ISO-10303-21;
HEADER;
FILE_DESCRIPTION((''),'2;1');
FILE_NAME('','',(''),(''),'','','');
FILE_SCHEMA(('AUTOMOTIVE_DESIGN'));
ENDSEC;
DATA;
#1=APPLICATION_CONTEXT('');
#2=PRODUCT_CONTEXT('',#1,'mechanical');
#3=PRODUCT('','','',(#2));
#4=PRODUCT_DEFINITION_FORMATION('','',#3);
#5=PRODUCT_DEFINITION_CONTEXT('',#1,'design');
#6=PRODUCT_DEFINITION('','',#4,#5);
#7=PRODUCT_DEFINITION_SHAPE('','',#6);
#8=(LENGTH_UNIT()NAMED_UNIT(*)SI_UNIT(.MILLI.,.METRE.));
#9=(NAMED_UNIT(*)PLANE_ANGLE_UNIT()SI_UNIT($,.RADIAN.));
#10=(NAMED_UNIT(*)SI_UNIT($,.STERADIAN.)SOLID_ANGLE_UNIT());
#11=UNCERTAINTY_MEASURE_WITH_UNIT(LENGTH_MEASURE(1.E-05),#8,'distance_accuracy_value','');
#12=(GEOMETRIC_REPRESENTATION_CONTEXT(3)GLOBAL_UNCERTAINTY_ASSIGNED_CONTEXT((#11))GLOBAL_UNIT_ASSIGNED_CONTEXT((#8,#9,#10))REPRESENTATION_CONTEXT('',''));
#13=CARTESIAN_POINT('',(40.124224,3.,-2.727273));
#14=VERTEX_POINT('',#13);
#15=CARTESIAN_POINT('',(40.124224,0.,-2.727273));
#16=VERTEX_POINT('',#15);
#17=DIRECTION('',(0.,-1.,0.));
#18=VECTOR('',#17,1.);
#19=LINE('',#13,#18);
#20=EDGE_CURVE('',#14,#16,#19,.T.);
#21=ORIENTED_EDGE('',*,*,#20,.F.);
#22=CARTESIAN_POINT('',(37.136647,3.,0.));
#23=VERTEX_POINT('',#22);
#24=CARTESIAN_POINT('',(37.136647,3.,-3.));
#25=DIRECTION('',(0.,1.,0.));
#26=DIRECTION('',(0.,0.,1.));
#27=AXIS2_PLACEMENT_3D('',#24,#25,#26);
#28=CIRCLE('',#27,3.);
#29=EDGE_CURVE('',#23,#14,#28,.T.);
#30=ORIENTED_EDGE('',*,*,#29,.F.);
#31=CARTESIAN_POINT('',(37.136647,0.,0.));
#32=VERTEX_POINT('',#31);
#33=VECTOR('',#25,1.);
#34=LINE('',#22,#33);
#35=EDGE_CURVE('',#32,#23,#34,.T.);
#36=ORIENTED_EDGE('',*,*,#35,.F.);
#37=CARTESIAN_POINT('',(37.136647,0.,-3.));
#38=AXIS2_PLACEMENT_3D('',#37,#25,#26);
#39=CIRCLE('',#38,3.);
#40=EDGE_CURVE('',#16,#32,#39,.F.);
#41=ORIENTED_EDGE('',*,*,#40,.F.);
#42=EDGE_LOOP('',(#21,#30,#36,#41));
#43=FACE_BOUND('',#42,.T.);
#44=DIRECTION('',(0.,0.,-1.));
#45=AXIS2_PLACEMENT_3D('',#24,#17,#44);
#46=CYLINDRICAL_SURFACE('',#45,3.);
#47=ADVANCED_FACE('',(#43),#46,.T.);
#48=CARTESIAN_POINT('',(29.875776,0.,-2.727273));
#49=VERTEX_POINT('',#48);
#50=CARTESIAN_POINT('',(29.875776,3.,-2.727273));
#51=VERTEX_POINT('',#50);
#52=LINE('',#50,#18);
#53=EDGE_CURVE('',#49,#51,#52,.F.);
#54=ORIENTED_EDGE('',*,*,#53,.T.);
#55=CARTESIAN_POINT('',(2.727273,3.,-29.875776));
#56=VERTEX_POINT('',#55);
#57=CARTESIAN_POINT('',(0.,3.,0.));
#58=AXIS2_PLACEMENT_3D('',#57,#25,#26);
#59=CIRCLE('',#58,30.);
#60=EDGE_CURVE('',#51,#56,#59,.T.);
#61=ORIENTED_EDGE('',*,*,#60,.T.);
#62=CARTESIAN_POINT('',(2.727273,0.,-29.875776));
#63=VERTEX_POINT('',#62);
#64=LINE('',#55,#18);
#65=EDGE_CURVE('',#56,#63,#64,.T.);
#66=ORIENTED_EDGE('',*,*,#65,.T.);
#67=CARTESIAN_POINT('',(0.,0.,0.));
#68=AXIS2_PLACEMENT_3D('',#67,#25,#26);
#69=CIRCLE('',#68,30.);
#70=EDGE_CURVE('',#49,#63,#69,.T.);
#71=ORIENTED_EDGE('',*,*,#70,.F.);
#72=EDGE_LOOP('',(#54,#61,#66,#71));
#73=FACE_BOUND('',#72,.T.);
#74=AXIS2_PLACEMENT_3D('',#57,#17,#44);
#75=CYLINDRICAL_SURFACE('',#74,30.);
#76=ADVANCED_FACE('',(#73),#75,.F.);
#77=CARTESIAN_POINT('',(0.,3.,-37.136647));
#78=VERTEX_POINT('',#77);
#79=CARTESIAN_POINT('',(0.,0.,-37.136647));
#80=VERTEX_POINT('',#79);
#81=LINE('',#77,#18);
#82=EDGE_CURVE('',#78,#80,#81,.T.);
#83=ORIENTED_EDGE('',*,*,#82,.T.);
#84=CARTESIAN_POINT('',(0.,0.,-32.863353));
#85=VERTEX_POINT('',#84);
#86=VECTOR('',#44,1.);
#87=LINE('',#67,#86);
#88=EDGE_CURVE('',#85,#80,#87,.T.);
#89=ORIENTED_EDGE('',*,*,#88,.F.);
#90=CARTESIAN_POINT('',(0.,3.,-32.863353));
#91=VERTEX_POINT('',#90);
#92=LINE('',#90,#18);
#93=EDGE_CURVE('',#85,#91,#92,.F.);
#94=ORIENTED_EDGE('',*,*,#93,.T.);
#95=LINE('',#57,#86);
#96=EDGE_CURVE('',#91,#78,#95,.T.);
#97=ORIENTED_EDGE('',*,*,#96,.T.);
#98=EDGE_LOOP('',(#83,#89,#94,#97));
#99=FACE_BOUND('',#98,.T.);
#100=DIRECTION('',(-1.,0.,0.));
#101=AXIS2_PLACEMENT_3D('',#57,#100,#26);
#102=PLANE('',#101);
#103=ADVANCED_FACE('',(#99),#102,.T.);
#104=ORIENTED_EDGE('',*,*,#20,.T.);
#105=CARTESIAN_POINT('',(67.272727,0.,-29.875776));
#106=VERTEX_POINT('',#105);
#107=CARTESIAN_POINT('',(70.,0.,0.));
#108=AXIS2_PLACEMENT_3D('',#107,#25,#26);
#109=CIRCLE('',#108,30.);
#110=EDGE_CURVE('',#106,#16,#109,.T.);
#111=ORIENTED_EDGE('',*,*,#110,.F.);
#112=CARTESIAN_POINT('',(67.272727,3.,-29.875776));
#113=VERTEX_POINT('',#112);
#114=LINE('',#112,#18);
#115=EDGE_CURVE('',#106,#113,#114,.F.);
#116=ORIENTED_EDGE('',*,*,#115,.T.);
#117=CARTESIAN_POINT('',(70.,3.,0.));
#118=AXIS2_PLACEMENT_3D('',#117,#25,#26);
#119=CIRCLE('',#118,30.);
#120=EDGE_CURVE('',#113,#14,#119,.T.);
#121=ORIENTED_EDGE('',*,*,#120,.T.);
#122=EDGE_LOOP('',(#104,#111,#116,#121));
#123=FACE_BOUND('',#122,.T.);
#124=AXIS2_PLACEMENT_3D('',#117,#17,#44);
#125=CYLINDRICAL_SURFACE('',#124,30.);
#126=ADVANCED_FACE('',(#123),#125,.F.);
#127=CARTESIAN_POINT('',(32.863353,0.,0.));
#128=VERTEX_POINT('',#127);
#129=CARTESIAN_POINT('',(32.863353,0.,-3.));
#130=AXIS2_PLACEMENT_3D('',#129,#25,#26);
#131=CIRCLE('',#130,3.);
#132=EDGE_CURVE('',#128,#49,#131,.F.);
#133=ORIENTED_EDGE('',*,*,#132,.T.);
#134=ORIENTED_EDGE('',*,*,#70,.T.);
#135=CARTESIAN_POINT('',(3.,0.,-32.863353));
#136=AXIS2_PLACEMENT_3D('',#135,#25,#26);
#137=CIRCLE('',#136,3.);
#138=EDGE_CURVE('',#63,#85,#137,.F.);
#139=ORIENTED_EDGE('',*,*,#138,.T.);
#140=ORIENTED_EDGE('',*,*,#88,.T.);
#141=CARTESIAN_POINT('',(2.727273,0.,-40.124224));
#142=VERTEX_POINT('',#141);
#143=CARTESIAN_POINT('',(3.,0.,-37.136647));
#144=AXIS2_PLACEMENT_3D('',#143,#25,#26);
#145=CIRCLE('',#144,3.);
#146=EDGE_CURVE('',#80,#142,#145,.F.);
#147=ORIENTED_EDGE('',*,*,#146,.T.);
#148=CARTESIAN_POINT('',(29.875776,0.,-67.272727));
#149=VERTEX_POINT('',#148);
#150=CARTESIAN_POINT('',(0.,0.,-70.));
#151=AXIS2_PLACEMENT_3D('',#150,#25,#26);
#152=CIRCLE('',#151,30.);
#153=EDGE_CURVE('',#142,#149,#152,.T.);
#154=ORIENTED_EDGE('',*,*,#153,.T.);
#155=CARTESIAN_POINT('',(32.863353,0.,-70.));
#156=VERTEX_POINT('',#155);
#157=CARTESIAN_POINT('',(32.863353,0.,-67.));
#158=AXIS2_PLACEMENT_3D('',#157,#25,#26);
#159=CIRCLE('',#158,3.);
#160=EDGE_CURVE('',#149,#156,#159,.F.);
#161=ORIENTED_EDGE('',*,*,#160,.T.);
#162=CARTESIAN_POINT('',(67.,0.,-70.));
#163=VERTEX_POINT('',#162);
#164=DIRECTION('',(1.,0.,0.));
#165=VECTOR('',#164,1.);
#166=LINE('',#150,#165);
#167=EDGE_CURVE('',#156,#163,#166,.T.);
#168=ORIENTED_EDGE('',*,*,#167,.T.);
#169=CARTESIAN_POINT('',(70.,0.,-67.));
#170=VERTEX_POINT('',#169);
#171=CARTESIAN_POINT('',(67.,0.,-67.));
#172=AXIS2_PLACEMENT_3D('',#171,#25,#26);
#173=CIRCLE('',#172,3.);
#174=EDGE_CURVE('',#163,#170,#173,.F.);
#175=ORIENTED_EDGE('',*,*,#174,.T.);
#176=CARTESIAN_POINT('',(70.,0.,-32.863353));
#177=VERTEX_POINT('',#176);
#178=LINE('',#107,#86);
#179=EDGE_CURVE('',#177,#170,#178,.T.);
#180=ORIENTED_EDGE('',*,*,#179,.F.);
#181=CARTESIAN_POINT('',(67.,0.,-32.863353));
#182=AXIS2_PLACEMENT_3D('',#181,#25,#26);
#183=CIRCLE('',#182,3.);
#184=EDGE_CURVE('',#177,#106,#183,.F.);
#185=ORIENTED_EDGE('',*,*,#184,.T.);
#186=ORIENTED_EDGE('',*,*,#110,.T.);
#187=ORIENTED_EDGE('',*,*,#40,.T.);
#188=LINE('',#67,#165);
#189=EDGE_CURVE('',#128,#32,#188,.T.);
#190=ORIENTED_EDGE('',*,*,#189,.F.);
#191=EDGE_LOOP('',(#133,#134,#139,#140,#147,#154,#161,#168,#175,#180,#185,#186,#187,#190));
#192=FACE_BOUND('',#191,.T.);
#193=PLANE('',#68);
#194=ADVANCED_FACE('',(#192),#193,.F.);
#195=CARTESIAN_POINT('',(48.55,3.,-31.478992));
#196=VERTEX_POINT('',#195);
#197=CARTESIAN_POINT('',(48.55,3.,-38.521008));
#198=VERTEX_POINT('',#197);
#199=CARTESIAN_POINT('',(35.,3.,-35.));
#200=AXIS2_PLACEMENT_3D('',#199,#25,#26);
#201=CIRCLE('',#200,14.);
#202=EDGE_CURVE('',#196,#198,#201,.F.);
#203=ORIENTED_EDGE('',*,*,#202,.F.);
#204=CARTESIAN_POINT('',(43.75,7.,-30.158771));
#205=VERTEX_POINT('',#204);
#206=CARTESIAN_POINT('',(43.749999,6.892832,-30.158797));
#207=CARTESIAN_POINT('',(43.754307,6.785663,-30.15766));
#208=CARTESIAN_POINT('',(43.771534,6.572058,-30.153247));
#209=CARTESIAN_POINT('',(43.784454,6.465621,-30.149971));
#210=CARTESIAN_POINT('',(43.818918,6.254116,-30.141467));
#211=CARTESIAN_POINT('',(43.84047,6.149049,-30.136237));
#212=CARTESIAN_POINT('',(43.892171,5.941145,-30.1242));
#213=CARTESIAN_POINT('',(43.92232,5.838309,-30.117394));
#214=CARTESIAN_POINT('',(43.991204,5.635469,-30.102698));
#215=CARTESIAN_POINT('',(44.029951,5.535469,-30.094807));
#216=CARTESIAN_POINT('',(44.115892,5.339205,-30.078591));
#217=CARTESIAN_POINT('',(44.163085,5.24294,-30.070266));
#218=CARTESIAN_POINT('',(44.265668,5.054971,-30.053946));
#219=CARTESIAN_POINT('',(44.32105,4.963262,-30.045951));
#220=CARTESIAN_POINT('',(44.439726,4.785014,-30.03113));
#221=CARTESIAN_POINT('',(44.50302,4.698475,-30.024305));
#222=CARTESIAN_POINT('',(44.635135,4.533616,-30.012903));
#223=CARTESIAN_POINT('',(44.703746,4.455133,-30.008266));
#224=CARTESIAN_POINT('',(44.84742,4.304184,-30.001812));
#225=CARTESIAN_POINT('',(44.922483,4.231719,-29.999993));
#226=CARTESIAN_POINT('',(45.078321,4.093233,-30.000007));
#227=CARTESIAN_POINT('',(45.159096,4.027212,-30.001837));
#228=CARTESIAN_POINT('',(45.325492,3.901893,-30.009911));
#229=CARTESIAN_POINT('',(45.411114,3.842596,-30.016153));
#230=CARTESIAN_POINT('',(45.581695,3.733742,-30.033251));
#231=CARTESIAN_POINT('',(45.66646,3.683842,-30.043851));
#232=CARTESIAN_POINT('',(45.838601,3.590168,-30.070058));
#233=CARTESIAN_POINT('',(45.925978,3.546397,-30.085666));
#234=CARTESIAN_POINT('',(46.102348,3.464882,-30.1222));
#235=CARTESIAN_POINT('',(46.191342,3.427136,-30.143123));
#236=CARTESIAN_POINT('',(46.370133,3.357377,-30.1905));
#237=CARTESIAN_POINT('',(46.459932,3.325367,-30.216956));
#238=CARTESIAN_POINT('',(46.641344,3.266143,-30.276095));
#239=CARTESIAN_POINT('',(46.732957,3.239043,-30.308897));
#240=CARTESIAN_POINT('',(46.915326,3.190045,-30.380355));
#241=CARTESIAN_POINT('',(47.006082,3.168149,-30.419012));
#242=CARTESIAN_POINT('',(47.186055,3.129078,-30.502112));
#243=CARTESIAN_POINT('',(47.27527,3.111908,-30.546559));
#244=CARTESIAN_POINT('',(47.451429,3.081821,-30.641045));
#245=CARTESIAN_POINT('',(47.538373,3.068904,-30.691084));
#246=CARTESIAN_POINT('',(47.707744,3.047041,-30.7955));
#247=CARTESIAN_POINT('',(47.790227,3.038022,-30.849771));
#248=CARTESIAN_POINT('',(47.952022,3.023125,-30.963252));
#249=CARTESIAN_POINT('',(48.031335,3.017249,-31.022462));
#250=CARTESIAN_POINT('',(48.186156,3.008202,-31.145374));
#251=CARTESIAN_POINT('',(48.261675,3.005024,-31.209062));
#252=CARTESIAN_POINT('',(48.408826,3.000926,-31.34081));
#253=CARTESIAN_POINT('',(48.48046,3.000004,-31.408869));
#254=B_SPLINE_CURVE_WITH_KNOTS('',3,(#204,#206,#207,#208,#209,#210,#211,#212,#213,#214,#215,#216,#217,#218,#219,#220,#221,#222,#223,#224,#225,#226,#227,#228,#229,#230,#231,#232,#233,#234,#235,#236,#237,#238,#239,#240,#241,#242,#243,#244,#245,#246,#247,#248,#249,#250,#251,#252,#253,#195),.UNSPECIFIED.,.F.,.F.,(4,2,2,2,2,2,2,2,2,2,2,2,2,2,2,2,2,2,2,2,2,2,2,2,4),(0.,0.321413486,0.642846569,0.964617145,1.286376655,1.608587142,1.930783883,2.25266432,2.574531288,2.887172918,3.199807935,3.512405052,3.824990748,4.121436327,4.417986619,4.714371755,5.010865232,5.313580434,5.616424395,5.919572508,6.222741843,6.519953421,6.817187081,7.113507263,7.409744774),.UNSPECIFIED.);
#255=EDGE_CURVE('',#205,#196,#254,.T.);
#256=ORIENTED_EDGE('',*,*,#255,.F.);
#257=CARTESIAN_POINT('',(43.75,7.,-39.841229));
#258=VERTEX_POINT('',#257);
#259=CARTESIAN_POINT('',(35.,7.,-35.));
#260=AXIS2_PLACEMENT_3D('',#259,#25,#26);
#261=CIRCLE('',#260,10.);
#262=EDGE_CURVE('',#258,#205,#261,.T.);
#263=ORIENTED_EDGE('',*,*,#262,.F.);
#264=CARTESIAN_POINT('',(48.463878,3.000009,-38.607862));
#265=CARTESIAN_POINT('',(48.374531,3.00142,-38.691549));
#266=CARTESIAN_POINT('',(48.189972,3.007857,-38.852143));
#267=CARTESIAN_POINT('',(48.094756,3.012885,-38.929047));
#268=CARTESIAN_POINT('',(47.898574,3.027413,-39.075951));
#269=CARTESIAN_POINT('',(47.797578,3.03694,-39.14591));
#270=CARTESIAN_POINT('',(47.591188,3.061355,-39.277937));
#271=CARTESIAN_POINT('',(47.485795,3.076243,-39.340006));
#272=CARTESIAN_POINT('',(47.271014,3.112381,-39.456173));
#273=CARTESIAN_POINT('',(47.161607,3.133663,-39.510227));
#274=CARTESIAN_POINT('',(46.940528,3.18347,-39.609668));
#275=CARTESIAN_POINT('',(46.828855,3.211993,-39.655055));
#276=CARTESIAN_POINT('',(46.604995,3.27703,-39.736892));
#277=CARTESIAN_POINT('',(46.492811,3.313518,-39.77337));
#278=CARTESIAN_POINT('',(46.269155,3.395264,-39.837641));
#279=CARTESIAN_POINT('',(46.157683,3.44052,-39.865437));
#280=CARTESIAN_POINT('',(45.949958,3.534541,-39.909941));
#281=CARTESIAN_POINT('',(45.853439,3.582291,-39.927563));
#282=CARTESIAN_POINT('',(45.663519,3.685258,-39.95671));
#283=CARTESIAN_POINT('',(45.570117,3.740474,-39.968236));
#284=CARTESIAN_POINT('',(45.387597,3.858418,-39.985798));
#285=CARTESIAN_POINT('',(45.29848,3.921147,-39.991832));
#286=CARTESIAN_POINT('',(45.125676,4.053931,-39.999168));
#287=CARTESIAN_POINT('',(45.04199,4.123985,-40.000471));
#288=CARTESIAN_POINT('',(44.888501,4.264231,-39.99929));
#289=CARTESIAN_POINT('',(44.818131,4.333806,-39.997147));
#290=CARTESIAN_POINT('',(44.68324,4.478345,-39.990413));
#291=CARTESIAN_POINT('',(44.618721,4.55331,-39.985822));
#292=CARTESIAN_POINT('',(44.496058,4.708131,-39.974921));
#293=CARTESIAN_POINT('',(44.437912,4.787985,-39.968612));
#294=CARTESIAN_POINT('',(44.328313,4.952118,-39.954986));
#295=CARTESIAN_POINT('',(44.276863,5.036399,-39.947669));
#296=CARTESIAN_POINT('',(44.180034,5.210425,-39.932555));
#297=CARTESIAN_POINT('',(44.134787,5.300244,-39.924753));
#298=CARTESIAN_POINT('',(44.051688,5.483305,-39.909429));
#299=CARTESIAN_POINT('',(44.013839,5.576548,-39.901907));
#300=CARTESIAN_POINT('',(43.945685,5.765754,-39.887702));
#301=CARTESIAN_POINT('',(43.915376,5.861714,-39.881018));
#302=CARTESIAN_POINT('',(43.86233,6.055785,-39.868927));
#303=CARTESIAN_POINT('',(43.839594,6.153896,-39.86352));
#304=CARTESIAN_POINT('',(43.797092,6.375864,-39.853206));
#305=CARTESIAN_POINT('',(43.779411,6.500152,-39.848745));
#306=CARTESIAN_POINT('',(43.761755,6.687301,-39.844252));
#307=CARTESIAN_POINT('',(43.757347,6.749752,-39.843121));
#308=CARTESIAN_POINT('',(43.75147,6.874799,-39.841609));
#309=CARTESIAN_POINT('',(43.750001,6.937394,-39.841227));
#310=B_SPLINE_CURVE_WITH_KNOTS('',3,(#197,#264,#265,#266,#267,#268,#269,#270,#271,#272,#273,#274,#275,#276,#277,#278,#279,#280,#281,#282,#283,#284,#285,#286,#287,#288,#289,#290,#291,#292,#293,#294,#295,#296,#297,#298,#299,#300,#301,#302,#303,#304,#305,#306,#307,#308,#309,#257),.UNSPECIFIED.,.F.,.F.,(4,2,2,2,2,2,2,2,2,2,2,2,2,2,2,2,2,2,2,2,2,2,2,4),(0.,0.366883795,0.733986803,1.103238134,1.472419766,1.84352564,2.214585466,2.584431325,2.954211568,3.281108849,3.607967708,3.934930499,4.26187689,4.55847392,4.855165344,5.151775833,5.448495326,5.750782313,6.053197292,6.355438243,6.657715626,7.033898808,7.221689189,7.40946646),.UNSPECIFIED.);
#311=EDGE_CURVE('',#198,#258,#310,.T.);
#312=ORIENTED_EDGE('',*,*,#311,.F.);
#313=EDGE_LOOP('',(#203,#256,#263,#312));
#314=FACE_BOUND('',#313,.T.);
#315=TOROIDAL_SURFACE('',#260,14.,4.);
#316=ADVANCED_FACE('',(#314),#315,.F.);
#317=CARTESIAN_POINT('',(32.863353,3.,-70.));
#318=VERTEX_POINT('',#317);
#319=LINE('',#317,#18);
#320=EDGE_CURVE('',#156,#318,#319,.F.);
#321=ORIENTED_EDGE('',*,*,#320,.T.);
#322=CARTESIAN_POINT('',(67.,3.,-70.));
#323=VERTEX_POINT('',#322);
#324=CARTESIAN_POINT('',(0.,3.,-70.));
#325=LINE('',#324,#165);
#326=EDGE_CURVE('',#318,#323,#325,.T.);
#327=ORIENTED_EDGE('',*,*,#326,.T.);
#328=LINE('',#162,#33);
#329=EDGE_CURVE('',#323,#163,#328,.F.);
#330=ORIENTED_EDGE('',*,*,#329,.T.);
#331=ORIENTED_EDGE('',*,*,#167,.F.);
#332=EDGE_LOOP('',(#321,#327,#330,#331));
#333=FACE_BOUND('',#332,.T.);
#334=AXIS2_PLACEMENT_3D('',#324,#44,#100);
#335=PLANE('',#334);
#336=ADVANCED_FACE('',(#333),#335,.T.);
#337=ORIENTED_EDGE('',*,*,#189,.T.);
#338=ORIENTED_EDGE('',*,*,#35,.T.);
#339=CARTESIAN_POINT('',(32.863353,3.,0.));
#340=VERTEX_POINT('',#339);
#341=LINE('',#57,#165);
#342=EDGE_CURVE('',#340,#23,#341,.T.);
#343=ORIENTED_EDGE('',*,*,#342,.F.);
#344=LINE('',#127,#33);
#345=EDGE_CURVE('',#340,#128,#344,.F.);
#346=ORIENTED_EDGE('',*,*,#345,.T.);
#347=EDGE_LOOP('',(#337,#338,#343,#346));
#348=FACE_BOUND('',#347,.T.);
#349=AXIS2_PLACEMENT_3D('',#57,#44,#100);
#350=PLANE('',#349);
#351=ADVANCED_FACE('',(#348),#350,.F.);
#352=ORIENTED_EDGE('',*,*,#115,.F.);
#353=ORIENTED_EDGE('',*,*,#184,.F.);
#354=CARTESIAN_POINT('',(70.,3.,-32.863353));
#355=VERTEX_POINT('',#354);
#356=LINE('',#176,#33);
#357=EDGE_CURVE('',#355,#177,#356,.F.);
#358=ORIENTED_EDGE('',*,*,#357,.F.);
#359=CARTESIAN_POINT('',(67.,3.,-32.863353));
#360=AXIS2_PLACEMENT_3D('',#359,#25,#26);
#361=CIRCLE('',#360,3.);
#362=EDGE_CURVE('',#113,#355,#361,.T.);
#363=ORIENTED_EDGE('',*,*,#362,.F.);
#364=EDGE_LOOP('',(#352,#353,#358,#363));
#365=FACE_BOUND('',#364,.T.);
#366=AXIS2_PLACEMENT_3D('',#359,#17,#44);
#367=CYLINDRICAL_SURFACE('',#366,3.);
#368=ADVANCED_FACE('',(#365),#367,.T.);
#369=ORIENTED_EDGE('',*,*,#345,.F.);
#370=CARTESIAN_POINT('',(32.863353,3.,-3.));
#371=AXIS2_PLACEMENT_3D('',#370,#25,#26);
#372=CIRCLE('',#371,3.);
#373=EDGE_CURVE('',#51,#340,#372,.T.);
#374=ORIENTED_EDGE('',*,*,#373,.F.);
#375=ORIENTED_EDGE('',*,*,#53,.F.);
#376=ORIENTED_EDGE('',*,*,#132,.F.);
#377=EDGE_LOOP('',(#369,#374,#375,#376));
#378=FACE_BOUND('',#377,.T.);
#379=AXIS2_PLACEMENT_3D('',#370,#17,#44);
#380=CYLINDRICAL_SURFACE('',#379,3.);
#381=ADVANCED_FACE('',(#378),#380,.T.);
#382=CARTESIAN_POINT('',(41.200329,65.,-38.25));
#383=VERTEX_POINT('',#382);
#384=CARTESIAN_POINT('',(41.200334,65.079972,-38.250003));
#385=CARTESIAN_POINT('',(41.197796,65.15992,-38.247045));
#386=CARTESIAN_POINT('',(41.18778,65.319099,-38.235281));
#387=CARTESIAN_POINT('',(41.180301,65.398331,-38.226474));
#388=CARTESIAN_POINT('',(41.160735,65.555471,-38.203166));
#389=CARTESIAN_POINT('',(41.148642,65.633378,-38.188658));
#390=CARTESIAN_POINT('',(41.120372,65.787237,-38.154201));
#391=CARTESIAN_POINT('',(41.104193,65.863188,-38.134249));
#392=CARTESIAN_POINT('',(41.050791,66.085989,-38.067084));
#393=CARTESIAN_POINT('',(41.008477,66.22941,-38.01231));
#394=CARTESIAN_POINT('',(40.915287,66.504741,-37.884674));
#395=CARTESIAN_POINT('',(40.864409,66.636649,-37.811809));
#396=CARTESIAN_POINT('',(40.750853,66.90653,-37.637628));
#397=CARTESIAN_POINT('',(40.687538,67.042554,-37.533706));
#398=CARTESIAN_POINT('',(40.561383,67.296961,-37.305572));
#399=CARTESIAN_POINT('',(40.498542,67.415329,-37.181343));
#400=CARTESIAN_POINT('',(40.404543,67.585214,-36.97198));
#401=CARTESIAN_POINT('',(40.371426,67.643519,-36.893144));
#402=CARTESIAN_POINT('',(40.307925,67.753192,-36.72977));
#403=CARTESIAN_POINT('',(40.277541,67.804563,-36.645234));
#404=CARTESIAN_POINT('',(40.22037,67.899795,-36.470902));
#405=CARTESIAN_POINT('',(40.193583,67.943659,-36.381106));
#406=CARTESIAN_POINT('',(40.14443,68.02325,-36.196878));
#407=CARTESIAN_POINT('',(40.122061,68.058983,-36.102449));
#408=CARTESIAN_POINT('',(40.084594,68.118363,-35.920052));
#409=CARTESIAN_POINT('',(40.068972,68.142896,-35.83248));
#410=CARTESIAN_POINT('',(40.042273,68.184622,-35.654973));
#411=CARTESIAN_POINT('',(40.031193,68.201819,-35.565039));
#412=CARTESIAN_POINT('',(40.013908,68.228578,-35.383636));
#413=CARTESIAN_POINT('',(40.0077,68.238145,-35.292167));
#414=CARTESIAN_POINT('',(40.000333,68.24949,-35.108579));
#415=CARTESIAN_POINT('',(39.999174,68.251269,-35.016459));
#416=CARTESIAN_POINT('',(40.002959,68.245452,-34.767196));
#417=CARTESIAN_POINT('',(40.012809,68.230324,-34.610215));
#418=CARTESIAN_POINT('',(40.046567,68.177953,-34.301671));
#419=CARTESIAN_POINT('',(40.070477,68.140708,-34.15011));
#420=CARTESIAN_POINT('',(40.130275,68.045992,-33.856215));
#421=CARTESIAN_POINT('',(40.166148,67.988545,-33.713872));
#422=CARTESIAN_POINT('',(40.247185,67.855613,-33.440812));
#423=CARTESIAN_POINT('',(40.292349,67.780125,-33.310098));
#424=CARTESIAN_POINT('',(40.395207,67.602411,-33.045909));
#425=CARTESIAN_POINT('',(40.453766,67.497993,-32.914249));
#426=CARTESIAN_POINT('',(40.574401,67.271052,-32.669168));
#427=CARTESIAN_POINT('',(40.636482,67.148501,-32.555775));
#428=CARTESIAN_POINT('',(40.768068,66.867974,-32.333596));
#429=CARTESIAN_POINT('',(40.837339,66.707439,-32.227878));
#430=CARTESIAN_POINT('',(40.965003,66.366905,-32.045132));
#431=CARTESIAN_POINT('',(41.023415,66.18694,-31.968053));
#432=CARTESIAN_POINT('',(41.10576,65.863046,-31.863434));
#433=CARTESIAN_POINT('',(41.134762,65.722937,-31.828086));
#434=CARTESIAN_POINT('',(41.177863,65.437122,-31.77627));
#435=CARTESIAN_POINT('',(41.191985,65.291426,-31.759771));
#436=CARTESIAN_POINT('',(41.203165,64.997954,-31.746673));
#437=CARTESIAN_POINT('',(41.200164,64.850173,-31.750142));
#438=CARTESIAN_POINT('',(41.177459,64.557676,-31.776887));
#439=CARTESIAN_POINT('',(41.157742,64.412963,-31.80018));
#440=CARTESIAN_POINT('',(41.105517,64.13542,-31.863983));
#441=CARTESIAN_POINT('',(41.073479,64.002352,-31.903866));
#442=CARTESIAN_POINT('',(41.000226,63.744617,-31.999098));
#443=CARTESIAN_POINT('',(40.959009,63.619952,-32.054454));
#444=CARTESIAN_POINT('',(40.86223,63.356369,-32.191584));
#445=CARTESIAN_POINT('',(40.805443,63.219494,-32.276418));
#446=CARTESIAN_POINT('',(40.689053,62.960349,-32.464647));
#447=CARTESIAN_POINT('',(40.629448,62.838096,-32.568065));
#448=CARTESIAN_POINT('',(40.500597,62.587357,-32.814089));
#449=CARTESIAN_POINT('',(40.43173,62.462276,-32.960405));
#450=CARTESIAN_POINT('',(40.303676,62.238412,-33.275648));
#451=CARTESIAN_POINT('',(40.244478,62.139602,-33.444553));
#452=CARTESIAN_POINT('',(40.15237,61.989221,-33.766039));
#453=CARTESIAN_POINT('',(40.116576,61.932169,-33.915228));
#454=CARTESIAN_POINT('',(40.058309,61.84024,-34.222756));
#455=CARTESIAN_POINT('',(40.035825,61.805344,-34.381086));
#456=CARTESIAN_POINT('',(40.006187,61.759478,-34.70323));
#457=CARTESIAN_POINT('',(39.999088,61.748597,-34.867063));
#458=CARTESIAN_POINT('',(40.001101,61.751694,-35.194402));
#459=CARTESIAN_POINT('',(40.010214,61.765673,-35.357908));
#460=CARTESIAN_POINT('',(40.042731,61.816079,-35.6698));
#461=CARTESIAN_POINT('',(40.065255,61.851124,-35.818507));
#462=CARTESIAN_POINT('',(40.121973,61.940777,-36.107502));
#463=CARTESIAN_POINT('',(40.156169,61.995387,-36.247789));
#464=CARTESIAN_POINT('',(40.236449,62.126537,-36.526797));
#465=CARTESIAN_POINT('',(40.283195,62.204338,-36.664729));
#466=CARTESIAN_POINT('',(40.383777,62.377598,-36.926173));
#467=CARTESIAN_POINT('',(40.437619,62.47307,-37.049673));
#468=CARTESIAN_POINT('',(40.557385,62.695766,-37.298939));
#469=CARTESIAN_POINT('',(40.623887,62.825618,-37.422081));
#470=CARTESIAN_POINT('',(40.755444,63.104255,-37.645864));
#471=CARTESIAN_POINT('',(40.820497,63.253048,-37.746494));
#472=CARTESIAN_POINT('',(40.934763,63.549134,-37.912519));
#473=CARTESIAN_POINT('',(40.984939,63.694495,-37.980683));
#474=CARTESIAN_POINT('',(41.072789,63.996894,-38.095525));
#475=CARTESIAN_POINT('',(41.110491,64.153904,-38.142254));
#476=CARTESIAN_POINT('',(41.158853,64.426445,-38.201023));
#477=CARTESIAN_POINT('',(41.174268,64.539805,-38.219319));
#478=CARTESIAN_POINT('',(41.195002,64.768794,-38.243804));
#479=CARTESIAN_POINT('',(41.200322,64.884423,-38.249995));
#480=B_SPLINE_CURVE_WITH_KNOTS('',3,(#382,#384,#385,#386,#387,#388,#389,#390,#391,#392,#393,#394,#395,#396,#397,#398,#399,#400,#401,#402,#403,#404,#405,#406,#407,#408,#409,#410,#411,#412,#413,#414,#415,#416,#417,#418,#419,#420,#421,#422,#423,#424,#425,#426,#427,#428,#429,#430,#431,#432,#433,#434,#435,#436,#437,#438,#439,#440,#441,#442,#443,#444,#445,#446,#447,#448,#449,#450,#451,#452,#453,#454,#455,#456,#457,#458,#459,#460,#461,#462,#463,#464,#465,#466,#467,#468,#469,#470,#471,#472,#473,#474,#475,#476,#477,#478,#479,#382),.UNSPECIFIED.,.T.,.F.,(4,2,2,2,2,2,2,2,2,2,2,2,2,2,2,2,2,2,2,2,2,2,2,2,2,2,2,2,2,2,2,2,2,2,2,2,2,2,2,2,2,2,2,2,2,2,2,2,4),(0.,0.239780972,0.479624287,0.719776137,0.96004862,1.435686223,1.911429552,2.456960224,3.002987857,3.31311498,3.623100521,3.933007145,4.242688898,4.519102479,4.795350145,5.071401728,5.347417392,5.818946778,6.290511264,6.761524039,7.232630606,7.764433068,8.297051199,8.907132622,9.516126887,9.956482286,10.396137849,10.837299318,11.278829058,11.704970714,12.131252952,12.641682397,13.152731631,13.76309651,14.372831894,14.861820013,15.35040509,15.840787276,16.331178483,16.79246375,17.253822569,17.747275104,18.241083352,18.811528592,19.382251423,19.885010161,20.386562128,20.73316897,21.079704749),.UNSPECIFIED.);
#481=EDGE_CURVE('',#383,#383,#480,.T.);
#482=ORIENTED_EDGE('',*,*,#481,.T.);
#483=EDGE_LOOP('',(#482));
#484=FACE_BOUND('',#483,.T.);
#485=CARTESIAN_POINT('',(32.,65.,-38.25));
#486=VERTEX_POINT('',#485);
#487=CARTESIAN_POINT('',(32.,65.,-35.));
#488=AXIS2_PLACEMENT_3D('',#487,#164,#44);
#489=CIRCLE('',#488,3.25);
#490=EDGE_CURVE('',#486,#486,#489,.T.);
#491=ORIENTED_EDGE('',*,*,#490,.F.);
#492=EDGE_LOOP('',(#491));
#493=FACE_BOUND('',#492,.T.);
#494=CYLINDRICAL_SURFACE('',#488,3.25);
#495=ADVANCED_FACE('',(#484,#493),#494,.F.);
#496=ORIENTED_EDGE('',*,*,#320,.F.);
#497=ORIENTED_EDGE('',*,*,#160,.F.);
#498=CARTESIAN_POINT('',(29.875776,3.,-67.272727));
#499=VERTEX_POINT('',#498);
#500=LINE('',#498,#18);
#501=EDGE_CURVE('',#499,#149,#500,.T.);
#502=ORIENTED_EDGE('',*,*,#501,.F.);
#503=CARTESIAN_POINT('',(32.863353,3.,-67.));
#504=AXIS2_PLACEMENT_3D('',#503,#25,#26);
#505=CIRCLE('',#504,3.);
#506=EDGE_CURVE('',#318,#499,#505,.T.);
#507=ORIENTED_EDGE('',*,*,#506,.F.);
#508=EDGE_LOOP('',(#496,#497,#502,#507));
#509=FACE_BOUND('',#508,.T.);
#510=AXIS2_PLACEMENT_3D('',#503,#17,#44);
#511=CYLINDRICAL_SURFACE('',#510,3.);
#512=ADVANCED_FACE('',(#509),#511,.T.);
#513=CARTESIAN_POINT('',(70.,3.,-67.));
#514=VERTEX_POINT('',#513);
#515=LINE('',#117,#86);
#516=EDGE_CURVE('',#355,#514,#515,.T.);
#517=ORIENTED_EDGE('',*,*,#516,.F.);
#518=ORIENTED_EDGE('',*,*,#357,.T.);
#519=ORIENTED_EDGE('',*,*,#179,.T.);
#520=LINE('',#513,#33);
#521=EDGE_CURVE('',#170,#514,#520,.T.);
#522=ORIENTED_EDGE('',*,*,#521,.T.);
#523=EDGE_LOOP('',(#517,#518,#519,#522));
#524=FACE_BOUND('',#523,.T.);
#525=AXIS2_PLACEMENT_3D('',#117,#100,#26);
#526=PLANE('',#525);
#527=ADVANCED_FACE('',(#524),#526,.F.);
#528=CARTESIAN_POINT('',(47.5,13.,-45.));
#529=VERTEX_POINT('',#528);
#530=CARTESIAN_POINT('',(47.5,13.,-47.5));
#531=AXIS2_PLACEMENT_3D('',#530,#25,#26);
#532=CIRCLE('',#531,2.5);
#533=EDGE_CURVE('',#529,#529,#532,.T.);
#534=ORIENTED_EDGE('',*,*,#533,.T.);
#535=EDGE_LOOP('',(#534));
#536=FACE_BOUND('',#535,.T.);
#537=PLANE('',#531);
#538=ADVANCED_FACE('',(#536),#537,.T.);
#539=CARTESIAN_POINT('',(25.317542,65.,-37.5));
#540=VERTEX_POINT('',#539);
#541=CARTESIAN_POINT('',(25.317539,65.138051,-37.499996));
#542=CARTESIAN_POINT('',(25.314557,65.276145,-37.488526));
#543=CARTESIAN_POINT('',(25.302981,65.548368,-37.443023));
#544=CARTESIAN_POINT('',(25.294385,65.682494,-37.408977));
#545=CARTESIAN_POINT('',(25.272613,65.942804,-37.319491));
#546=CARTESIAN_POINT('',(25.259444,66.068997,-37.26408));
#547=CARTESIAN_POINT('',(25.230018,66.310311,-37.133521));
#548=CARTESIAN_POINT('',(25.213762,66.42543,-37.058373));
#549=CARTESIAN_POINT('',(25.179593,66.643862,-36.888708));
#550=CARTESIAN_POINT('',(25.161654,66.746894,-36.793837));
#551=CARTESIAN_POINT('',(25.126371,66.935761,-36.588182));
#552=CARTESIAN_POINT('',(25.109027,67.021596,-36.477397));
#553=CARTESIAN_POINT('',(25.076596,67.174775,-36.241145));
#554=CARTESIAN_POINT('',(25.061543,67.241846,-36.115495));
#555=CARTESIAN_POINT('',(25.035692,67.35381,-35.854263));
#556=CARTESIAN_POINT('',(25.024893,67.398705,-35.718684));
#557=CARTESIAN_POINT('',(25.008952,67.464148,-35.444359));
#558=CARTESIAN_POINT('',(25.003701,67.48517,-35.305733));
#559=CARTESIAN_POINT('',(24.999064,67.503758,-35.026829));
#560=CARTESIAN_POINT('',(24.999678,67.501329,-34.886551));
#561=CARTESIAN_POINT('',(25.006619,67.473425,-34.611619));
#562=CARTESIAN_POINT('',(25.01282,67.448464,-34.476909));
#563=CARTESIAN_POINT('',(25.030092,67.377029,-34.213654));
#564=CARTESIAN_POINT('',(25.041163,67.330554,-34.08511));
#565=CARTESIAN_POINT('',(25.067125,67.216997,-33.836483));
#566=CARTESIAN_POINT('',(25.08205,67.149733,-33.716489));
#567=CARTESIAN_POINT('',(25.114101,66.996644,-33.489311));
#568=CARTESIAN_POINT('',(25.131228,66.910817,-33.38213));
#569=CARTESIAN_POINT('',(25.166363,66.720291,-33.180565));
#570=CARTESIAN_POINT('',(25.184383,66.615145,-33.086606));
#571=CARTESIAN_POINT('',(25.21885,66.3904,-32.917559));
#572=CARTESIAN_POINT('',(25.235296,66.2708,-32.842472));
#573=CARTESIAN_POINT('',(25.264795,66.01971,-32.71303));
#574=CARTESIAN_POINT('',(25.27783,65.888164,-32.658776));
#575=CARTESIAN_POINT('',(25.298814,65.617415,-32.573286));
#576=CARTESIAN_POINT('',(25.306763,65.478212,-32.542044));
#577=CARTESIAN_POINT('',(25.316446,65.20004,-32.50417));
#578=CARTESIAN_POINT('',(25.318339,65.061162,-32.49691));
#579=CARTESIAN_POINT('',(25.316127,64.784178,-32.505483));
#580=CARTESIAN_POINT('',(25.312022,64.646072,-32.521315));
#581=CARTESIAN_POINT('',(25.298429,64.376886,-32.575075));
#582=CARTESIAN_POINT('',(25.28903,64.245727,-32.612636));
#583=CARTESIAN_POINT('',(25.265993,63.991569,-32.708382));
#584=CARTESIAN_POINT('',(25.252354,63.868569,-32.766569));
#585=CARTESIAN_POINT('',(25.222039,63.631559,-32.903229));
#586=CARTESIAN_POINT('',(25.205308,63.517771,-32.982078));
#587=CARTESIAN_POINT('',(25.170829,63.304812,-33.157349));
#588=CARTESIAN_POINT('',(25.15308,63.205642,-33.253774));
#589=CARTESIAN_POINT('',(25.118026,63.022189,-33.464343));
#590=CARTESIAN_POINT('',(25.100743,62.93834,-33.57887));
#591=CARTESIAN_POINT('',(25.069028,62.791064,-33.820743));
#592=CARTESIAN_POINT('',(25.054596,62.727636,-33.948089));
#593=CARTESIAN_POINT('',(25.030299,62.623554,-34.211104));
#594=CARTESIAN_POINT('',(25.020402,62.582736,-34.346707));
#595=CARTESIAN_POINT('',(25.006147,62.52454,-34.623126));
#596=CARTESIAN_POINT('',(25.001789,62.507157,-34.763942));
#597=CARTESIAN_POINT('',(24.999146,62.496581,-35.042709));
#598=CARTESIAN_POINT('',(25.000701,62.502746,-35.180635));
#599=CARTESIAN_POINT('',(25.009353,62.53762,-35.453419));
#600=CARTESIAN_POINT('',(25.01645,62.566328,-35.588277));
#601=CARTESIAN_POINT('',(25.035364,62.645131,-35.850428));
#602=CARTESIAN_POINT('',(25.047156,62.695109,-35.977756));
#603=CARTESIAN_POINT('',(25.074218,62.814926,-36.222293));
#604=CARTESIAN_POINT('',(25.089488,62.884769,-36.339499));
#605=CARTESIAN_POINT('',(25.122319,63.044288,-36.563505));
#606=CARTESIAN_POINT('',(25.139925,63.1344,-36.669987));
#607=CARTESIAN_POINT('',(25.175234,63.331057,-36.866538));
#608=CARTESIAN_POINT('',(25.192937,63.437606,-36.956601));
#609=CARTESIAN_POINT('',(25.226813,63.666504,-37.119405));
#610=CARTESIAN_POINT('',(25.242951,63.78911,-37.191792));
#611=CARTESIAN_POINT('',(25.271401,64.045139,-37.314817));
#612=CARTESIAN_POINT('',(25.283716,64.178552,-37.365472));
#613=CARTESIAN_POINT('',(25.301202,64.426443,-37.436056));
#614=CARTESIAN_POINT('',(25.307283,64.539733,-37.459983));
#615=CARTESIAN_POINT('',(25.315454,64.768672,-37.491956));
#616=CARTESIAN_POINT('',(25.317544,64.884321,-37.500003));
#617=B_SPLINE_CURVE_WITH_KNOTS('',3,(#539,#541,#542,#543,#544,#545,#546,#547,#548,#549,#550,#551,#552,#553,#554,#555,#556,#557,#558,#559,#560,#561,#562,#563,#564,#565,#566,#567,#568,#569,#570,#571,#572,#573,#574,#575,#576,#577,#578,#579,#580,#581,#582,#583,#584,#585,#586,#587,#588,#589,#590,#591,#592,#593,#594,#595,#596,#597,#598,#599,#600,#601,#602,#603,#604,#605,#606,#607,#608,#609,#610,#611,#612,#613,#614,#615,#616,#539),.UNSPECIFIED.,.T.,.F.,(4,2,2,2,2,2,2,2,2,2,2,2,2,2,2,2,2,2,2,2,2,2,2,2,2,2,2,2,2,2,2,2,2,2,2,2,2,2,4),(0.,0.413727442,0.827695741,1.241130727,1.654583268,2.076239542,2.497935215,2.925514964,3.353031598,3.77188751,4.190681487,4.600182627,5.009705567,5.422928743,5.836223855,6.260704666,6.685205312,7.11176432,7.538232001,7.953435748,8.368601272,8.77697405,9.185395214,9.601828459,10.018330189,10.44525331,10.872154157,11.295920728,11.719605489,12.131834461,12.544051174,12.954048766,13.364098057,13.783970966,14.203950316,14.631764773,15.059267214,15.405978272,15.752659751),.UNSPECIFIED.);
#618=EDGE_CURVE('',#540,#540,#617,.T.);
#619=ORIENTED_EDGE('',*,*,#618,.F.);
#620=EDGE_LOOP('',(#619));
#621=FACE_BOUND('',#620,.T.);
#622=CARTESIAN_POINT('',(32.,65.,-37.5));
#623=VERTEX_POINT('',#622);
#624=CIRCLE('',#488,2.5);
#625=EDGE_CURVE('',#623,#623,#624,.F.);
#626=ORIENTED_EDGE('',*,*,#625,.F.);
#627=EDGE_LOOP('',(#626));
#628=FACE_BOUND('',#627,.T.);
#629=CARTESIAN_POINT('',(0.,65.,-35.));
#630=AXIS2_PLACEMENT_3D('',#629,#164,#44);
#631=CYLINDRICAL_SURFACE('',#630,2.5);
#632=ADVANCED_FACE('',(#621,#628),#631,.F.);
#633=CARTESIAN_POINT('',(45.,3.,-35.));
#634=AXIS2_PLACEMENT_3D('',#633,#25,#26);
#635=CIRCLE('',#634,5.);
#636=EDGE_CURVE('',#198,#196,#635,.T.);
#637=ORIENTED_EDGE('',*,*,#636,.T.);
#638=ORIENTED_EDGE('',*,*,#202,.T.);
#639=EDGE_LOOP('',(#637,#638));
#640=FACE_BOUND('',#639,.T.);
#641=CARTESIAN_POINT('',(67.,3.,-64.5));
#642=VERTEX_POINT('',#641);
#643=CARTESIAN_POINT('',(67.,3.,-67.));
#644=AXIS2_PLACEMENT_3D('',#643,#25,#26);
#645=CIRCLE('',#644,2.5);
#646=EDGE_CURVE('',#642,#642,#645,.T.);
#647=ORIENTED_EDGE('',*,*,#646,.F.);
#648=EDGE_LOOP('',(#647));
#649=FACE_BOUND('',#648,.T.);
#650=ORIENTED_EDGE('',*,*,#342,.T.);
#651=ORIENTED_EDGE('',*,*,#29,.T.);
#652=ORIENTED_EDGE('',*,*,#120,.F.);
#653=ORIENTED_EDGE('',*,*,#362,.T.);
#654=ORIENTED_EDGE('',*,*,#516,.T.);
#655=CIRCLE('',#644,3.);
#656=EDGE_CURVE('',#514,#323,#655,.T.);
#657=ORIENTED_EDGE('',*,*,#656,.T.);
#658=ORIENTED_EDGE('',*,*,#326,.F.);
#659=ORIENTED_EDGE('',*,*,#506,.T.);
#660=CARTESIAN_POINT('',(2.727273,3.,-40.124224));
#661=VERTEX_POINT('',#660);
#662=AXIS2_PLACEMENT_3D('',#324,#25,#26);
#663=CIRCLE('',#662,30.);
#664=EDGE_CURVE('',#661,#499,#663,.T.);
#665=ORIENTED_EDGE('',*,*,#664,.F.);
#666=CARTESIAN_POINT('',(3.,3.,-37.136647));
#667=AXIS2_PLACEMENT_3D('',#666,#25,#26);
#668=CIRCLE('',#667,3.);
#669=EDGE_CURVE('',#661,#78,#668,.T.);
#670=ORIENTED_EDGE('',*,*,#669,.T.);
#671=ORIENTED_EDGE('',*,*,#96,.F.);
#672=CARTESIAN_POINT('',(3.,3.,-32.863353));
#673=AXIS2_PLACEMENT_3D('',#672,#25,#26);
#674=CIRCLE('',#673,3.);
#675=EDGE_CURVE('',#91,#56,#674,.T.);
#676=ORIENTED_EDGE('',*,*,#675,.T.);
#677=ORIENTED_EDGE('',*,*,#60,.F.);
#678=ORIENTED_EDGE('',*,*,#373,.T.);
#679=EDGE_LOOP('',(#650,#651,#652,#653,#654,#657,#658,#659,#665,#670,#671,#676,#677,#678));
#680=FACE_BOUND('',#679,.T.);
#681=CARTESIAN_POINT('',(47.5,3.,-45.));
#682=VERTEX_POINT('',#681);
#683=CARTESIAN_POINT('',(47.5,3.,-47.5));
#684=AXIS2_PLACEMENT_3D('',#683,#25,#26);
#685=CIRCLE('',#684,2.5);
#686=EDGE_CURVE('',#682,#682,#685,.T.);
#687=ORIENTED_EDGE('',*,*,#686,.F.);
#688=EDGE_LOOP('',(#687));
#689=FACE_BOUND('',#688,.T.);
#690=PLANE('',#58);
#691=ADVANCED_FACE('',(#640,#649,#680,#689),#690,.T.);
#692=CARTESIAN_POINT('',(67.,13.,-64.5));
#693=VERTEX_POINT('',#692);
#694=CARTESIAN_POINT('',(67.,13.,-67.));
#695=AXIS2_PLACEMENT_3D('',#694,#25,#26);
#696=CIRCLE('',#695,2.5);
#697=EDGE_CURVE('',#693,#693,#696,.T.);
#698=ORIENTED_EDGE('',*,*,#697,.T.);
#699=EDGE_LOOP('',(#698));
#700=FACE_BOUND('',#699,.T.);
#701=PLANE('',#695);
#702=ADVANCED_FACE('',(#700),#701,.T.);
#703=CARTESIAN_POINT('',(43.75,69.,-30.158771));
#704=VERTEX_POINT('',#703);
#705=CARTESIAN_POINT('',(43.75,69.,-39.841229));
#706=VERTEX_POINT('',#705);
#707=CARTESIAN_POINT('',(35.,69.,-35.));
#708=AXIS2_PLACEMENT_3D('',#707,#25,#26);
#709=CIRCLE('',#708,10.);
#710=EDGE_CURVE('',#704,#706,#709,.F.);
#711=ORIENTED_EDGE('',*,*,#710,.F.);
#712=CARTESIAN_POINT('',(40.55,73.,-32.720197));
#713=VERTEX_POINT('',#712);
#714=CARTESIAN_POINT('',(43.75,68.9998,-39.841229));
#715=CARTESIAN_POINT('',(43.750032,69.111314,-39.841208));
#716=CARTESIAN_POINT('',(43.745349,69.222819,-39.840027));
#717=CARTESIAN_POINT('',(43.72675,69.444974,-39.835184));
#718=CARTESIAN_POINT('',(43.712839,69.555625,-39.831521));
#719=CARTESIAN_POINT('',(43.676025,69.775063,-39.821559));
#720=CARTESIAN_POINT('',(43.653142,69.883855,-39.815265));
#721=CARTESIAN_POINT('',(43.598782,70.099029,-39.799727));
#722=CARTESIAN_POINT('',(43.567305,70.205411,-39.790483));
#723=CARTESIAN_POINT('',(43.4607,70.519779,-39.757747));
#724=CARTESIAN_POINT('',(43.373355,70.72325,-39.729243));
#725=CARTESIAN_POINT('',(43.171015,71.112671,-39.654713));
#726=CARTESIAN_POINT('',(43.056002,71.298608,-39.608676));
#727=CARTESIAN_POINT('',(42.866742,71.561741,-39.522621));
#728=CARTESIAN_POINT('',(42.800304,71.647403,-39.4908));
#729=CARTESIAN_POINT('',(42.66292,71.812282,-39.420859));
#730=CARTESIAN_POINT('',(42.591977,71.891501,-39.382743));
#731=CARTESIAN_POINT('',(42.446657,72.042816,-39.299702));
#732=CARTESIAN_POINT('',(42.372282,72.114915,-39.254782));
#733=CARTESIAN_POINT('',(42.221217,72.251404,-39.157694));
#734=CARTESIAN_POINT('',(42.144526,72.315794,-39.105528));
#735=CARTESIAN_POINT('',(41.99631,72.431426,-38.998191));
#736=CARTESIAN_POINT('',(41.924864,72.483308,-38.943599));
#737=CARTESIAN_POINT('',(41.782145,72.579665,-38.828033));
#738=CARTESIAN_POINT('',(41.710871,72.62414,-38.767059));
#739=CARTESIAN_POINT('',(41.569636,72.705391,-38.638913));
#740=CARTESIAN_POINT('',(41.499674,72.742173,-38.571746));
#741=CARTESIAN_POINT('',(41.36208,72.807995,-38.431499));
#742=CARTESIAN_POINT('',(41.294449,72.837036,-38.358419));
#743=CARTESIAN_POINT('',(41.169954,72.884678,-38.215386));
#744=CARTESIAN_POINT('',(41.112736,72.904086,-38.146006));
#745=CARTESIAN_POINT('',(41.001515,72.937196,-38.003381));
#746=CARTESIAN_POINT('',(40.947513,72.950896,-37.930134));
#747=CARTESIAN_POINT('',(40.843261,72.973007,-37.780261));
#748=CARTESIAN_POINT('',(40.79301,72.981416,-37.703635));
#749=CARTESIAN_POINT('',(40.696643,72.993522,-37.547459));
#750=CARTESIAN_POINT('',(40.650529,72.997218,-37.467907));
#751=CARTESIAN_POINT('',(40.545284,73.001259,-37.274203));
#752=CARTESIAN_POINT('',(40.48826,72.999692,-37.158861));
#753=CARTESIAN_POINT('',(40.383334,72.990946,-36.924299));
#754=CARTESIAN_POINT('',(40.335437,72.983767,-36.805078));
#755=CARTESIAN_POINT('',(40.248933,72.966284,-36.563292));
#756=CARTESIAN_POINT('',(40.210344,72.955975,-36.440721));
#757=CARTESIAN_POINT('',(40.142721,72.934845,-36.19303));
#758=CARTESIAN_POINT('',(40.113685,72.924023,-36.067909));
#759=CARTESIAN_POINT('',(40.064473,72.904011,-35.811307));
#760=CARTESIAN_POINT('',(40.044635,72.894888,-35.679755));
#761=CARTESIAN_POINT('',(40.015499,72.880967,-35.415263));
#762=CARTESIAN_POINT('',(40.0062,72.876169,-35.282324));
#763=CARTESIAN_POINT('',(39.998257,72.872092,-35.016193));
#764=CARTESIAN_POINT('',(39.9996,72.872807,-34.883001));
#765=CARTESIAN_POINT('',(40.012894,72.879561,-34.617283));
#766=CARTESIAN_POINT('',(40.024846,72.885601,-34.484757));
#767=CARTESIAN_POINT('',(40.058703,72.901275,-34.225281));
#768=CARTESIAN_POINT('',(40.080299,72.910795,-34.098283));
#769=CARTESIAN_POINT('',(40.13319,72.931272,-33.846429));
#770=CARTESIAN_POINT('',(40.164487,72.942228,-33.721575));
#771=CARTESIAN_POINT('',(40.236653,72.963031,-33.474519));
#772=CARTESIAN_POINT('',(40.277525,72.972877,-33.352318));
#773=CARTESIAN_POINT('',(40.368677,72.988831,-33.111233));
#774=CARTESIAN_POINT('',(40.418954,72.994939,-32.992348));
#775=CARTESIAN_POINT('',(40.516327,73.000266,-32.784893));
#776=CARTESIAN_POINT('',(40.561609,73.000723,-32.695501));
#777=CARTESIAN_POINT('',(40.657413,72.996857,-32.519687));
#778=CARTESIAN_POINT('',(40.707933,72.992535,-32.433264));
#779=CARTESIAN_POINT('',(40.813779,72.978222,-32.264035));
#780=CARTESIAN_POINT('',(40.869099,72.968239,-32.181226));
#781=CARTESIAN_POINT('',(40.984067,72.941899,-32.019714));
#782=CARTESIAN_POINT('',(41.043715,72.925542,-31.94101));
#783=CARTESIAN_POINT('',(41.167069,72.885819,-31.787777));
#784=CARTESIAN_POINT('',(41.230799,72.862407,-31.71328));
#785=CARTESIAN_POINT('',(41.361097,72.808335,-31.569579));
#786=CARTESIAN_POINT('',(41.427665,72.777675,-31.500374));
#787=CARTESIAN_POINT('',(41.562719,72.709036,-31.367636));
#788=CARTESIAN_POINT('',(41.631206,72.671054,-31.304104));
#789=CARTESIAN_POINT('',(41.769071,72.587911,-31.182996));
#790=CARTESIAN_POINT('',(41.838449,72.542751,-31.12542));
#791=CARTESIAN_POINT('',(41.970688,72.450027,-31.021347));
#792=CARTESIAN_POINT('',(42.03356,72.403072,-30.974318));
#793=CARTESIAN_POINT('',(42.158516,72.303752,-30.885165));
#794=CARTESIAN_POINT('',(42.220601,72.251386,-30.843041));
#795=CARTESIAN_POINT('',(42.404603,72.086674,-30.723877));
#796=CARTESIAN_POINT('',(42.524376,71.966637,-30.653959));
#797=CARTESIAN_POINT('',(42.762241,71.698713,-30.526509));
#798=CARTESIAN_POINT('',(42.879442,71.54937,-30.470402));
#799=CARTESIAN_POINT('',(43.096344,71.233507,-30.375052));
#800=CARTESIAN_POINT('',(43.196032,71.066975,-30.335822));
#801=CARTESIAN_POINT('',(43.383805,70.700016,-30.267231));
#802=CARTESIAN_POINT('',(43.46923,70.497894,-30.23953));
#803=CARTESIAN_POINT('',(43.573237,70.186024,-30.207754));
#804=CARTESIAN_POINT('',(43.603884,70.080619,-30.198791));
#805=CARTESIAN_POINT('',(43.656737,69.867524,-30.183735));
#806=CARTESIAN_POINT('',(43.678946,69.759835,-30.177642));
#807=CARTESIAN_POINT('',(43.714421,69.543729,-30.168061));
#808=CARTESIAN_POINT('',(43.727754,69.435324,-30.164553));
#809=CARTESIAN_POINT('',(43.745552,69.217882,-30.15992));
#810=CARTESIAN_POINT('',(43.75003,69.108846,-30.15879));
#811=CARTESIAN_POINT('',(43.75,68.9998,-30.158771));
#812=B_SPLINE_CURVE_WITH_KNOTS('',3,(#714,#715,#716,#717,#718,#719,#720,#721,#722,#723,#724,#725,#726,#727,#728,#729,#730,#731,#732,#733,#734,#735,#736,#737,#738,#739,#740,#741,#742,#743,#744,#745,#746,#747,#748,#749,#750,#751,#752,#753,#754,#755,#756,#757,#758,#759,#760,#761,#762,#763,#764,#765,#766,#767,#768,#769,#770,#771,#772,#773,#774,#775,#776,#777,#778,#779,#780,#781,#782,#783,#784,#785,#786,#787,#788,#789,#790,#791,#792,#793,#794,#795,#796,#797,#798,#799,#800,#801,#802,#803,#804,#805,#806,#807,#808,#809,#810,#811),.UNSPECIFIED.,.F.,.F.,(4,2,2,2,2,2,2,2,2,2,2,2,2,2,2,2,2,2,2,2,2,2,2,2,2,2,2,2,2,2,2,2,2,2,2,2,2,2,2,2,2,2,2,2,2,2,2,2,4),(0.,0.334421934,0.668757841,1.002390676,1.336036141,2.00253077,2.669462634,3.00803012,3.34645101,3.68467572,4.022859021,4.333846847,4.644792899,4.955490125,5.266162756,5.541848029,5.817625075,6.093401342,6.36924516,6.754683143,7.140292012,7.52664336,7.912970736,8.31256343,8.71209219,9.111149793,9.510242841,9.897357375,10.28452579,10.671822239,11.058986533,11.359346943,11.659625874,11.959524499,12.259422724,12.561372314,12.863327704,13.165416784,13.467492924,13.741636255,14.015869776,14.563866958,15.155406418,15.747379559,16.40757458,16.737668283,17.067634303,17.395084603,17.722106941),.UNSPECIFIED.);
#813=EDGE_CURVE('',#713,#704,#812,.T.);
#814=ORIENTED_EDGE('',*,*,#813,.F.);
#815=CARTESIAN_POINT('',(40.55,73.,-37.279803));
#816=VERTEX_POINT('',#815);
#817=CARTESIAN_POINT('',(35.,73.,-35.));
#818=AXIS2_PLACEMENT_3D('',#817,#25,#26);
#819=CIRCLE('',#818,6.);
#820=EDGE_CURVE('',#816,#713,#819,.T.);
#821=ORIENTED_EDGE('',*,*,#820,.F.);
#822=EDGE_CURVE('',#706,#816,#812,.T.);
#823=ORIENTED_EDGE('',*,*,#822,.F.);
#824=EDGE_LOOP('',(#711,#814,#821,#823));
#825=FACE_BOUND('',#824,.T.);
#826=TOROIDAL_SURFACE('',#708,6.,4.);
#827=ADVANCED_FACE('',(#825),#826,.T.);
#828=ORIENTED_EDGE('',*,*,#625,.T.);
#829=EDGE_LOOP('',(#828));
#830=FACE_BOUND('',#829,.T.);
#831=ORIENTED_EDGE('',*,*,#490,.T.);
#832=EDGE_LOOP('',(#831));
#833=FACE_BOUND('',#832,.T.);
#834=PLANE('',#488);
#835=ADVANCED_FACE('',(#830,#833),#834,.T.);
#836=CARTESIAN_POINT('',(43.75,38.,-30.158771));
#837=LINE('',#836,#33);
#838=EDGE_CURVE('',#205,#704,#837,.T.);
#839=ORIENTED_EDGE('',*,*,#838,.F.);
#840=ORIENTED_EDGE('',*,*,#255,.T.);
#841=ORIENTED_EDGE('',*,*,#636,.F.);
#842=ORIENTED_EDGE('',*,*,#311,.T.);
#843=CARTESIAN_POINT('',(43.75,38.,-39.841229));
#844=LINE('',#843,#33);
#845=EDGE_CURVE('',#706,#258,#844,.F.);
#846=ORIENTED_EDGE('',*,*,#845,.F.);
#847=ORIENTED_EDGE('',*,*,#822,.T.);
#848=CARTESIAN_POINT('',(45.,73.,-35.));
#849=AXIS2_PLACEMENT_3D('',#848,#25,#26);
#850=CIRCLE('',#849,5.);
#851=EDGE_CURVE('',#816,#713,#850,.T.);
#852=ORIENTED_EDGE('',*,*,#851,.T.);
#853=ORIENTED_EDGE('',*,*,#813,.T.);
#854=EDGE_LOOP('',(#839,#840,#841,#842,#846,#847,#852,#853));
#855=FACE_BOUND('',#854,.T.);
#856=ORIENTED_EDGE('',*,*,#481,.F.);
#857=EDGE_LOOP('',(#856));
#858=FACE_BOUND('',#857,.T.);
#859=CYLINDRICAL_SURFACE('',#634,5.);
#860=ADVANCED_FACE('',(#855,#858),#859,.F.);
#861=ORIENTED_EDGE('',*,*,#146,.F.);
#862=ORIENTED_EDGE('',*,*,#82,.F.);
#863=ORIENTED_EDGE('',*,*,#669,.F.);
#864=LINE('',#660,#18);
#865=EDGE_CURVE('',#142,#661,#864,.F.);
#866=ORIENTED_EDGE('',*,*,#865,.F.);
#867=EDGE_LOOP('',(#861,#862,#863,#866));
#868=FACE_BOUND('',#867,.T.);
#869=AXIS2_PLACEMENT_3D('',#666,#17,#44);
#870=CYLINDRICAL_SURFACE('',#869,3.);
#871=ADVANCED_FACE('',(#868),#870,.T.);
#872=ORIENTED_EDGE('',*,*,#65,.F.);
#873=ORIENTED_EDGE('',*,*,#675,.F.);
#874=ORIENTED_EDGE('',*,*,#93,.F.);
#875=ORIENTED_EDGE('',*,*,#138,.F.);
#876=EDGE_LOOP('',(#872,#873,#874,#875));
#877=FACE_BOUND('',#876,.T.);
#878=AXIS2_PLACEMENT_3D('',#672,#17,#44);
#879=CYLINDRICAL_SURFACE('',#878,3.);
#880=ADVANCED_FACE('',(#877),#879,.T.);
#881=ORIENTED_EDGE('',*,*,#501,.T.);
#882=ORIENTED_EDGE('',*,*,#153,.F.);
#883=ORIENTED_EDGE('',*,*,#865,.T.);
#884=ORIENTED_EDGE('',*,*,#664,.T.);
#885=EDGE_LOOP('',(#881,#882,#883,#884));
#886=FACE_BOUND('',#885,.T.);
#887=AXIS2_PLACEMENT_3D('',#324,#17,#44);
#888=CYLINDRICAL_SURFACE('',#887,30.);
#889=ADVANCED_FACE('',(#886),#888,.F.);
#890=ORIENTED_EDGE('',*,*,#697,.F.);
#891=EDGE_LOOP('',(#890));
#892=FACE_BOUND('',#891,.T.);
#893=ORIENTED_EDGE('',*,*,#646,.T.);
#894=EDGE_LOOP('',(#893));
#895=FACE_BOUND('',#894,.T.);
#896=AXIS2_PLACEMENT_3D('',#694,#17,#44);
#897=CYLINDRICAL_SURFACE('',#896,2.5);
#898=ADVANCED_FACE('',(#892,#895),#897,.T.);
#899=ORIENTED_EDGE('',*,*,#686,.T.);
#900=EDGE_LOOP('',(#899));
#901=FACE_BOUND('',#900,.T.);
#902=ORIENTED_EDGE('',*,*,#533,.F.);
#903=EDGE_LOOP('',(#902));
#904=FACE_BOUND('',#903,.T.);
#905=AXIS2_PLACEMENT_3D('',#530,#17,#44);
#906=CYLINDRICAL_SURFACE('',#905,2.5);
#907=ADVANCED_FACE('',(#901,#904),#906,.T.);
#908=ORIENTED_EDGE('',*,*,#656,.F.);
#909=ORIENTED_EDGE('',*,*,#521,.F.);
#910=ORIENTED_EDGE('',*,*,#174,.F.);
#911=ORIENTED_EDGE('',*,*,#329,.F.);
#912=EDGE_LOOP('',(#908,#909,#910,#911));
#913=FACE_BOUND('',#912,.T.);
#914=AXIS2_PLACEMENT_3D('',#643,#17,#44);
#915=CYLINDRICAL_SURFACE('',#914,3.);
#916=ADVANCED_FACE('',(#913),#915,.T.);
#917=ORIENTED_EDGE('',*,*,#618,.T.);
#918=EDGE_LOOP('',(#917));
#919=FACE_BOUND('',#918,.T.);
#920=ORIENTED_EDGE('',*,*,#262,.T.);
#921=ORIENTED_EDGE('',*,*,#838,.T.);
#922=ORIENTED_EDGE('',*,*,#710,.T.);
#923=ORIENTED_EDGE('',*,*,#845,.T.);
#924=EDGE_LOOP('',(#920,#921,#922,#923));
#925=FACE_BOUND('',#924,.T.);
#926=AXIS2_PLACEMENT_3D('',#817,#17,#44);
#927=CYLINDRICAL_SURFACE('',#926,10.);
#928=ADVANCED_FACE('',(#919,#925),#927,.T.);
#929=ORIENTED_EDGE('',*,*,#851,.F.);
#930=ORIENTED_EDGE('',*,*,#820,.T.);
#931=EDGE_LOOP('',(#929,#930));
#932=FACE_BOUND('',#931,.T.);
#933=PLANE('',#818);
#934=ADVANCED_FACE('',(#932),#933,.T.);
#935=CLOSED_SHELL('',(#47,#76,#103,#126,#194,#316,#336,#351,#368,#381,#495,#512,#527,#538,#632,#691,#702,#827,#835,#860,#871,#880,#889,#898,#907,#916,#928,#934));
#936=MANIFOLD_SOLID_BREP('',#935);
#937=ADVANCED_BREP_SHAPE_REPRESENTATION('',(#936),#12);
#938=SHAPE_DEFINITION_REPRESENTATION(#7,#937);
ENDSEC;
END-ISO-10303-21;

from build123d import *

# Parameters (mm, degrees)
BOSS_EXTRUDE1_DEPTH = 3
FILLET1_R           = 3
SKETCH2_R           = 10
BOSS_EXTRUDE3_DEPTH = 70
SKETCH4_R           = 2.5
CUT_EXTRUDE2_DEPTH  = 70
SKETCH7_R           = 3.25
CUT_EXTRUDE3_DEPTH  = 38
FILLET3_R           = 4
SKETCH8_R           = 5
CUT_EXTRUDE4_DEPTH  = 70
SKETCH10_W          = 35
SKETCH10_H          = 35
BOSS_EXTRUDE5_DEPTH = 3
FILLET5_R           = 3
SKETCH11_R          = 2.5
BOSS_EXTRUDE6_DEPTH = 10
FILLET6_R           = 4


with BuildPart() as part:
    # Sketch1 → Boss-Extrude1 (new body)
    with BuildSketch(Plane(origin=(0, 0, 0), x_dir=(1, 0, 0), z_dir=(0, 1, 0))):
        with BuildLine():
            ThreePointArc((0, 30), (21.213203436, 21.213203436), (30, 0))
            Line((30, 0), (40, 0))
            ThreePointArc((40, 0), (48.786796564, 21.213203436), (70, 30))
            Line((70, 30), (70, 40))
            ThreePointArc((70, 40), (48.786796564, 48.786796564), (40, 70))
            Line((40, 70), (30, 70))
            ThreePointArc((30, 70), (21.213203436, 48.786796564), (0, 40))
            Line((0, 40), (0, 30))
        make_face()
    extrude(amount=BOSS_EXTRUDE1_DEPTH)

    # Fillet1
    fillet1_edges = [part.edges().sort_by_distance(p)[0] for p in [
        (70, 1.5, -40),
        (70, 1.5, -30),
        (40, 1.5, 0),
        (30, 1.5, 0),
        (0, 1.5, -30),
        (0, 1.5, -40),
        (30, 1.5, -70),
        (40, 1.5, -70),
    ]]
    fillet(fillet1_edges, radius=FILLET1_R)

    # Sketch2 → Boss-Extrude3 (add)
    with BuildSketch(Plane(origin=(0, 3, 0), x_dir=(1, 0, 0), z_dir=(0, 1, 0))):
        with Locations(Location((35, 35, 0), (0, 0, 270))):
            Circle(SKETCH2_R)
    extrude(amount=BOSS_EXTRUDE3_DEPTH)

    # Sketch4 → Cut-Extrude2 (cut)
    with BuildSketch(Plane(origin=(70, 0, 0), x_dir=(0, 0, -1), z_dir=(1, 0, 0))):
        with Locations((35, 65)):
            Circle(SKETCH4_R)
    extrude(amount=-CUT_EXTRUDE2_DEPTH, mode=Mode.SUBTRACT)

    # Sketch7 → Cut-Extrude3 (cut)
    with BuildSketch(Plane(origin=(70, 0, 0), x_dir=(0, 0, -1), z_dir=(1, 0, 0))):
        with Locations((35, 65)):
            Circle(SKETCH7_R)
    extrude(amount=-CUT_EXTRUDE3_DEPTH, mode=Mode.SUBTRACT)

    # Fillet3
    fillet3_edges = [part.edges().sort_by_distance(p)[0] for p in [
        (35, 73, -45),
    ]]
    fillet(fillet3_edges, radius=FILLET3_R)

    # Sketch8 → Cut-Extrude4 (cut)
    with BuildSketch(Plane(origin=(0, 73, 0), x_dir=(1, 0, 0), z_dir=(0, 1, 0))):
        with Locations((45, 35)):
            Circle(SKETCH8_R)
    extrude(amount=-CUT_EXTRUDE4_DEPTH, mode=Mode.SUBTRACT)

    # Sketch10 → Boss-Extrude5 (add)
    with BuildSketch(Plane(origin=(0, 3, 0), x_dir=(1, 0, 0), z_dir=(0, 1, 0))):
        with Locations((52.5, 52.5)):
            Rectangle(SKETCH10_W, SKETCH10_H)
    extrude(amount=-BOSS_EXTRUDE5_DEPTH)

    # Fillet5
    fillet5_edges = [part.edges().sort_by_distance(p)[0] for p in [
        (70, 1.5, -70),
    ]]
    fillet(fillet5_edges, radius=FILLET5_R)

    # Sketch11 → Boss-Extrude6 (add)
    with BuildSketch(Plane(origin=(0, 3, 0), x_dir=(1, 0, 0), z_dir=(0, 1, 0))):
        with Locations(Location((67, 67, 0), (0, 0, 270))):
            Circle(SKETCH11_R)
        with Locations(Location((47.5, 47.5, 0), (0, 0, 270))):
            Circle(SKETCH11_R)
    extrude(amount=BOSS_EXTRUDE6_DEPTH)

    # Fillet6
    # the kernel refuses this fillet: 4 mm, written as the material it adds along each edge
    with BuildSketch(Plane(origin=(35, 3, -35), x_dir=(0.9999950652018581, 0, -0.0031415874858794265), z_dir=(0.0031415874858794265, 0, 0.9999950652018581))) as fillet6_piece_1_section:
        with BuildLine():
            CenterArc((10 + FILLET6_R, FILLET6_R), FILLET6_R, 180, 90)
            Line((10, FILLET6_R), (10, 0))
            Line((10, 0), (10 + FILLET6_R, 0))
        make_face()
    fillet6_piece_1 = revolve(axis=Axis((35, 3, -35), (0, 1, 0)), revolution_arc=359.64, mode=Mode.PRIVATE)
    fillet6_piece_1 = fillet6_piece_1 - Plane(origin=(45, 4.127744663, -35), x_dir=(1, 0, 0), z_dir=(0, 1, 0)) * Cylinder(5, 56, mode=Mode.PRIVATE)
    add(fillet6_piece_1)


solid = part.part
